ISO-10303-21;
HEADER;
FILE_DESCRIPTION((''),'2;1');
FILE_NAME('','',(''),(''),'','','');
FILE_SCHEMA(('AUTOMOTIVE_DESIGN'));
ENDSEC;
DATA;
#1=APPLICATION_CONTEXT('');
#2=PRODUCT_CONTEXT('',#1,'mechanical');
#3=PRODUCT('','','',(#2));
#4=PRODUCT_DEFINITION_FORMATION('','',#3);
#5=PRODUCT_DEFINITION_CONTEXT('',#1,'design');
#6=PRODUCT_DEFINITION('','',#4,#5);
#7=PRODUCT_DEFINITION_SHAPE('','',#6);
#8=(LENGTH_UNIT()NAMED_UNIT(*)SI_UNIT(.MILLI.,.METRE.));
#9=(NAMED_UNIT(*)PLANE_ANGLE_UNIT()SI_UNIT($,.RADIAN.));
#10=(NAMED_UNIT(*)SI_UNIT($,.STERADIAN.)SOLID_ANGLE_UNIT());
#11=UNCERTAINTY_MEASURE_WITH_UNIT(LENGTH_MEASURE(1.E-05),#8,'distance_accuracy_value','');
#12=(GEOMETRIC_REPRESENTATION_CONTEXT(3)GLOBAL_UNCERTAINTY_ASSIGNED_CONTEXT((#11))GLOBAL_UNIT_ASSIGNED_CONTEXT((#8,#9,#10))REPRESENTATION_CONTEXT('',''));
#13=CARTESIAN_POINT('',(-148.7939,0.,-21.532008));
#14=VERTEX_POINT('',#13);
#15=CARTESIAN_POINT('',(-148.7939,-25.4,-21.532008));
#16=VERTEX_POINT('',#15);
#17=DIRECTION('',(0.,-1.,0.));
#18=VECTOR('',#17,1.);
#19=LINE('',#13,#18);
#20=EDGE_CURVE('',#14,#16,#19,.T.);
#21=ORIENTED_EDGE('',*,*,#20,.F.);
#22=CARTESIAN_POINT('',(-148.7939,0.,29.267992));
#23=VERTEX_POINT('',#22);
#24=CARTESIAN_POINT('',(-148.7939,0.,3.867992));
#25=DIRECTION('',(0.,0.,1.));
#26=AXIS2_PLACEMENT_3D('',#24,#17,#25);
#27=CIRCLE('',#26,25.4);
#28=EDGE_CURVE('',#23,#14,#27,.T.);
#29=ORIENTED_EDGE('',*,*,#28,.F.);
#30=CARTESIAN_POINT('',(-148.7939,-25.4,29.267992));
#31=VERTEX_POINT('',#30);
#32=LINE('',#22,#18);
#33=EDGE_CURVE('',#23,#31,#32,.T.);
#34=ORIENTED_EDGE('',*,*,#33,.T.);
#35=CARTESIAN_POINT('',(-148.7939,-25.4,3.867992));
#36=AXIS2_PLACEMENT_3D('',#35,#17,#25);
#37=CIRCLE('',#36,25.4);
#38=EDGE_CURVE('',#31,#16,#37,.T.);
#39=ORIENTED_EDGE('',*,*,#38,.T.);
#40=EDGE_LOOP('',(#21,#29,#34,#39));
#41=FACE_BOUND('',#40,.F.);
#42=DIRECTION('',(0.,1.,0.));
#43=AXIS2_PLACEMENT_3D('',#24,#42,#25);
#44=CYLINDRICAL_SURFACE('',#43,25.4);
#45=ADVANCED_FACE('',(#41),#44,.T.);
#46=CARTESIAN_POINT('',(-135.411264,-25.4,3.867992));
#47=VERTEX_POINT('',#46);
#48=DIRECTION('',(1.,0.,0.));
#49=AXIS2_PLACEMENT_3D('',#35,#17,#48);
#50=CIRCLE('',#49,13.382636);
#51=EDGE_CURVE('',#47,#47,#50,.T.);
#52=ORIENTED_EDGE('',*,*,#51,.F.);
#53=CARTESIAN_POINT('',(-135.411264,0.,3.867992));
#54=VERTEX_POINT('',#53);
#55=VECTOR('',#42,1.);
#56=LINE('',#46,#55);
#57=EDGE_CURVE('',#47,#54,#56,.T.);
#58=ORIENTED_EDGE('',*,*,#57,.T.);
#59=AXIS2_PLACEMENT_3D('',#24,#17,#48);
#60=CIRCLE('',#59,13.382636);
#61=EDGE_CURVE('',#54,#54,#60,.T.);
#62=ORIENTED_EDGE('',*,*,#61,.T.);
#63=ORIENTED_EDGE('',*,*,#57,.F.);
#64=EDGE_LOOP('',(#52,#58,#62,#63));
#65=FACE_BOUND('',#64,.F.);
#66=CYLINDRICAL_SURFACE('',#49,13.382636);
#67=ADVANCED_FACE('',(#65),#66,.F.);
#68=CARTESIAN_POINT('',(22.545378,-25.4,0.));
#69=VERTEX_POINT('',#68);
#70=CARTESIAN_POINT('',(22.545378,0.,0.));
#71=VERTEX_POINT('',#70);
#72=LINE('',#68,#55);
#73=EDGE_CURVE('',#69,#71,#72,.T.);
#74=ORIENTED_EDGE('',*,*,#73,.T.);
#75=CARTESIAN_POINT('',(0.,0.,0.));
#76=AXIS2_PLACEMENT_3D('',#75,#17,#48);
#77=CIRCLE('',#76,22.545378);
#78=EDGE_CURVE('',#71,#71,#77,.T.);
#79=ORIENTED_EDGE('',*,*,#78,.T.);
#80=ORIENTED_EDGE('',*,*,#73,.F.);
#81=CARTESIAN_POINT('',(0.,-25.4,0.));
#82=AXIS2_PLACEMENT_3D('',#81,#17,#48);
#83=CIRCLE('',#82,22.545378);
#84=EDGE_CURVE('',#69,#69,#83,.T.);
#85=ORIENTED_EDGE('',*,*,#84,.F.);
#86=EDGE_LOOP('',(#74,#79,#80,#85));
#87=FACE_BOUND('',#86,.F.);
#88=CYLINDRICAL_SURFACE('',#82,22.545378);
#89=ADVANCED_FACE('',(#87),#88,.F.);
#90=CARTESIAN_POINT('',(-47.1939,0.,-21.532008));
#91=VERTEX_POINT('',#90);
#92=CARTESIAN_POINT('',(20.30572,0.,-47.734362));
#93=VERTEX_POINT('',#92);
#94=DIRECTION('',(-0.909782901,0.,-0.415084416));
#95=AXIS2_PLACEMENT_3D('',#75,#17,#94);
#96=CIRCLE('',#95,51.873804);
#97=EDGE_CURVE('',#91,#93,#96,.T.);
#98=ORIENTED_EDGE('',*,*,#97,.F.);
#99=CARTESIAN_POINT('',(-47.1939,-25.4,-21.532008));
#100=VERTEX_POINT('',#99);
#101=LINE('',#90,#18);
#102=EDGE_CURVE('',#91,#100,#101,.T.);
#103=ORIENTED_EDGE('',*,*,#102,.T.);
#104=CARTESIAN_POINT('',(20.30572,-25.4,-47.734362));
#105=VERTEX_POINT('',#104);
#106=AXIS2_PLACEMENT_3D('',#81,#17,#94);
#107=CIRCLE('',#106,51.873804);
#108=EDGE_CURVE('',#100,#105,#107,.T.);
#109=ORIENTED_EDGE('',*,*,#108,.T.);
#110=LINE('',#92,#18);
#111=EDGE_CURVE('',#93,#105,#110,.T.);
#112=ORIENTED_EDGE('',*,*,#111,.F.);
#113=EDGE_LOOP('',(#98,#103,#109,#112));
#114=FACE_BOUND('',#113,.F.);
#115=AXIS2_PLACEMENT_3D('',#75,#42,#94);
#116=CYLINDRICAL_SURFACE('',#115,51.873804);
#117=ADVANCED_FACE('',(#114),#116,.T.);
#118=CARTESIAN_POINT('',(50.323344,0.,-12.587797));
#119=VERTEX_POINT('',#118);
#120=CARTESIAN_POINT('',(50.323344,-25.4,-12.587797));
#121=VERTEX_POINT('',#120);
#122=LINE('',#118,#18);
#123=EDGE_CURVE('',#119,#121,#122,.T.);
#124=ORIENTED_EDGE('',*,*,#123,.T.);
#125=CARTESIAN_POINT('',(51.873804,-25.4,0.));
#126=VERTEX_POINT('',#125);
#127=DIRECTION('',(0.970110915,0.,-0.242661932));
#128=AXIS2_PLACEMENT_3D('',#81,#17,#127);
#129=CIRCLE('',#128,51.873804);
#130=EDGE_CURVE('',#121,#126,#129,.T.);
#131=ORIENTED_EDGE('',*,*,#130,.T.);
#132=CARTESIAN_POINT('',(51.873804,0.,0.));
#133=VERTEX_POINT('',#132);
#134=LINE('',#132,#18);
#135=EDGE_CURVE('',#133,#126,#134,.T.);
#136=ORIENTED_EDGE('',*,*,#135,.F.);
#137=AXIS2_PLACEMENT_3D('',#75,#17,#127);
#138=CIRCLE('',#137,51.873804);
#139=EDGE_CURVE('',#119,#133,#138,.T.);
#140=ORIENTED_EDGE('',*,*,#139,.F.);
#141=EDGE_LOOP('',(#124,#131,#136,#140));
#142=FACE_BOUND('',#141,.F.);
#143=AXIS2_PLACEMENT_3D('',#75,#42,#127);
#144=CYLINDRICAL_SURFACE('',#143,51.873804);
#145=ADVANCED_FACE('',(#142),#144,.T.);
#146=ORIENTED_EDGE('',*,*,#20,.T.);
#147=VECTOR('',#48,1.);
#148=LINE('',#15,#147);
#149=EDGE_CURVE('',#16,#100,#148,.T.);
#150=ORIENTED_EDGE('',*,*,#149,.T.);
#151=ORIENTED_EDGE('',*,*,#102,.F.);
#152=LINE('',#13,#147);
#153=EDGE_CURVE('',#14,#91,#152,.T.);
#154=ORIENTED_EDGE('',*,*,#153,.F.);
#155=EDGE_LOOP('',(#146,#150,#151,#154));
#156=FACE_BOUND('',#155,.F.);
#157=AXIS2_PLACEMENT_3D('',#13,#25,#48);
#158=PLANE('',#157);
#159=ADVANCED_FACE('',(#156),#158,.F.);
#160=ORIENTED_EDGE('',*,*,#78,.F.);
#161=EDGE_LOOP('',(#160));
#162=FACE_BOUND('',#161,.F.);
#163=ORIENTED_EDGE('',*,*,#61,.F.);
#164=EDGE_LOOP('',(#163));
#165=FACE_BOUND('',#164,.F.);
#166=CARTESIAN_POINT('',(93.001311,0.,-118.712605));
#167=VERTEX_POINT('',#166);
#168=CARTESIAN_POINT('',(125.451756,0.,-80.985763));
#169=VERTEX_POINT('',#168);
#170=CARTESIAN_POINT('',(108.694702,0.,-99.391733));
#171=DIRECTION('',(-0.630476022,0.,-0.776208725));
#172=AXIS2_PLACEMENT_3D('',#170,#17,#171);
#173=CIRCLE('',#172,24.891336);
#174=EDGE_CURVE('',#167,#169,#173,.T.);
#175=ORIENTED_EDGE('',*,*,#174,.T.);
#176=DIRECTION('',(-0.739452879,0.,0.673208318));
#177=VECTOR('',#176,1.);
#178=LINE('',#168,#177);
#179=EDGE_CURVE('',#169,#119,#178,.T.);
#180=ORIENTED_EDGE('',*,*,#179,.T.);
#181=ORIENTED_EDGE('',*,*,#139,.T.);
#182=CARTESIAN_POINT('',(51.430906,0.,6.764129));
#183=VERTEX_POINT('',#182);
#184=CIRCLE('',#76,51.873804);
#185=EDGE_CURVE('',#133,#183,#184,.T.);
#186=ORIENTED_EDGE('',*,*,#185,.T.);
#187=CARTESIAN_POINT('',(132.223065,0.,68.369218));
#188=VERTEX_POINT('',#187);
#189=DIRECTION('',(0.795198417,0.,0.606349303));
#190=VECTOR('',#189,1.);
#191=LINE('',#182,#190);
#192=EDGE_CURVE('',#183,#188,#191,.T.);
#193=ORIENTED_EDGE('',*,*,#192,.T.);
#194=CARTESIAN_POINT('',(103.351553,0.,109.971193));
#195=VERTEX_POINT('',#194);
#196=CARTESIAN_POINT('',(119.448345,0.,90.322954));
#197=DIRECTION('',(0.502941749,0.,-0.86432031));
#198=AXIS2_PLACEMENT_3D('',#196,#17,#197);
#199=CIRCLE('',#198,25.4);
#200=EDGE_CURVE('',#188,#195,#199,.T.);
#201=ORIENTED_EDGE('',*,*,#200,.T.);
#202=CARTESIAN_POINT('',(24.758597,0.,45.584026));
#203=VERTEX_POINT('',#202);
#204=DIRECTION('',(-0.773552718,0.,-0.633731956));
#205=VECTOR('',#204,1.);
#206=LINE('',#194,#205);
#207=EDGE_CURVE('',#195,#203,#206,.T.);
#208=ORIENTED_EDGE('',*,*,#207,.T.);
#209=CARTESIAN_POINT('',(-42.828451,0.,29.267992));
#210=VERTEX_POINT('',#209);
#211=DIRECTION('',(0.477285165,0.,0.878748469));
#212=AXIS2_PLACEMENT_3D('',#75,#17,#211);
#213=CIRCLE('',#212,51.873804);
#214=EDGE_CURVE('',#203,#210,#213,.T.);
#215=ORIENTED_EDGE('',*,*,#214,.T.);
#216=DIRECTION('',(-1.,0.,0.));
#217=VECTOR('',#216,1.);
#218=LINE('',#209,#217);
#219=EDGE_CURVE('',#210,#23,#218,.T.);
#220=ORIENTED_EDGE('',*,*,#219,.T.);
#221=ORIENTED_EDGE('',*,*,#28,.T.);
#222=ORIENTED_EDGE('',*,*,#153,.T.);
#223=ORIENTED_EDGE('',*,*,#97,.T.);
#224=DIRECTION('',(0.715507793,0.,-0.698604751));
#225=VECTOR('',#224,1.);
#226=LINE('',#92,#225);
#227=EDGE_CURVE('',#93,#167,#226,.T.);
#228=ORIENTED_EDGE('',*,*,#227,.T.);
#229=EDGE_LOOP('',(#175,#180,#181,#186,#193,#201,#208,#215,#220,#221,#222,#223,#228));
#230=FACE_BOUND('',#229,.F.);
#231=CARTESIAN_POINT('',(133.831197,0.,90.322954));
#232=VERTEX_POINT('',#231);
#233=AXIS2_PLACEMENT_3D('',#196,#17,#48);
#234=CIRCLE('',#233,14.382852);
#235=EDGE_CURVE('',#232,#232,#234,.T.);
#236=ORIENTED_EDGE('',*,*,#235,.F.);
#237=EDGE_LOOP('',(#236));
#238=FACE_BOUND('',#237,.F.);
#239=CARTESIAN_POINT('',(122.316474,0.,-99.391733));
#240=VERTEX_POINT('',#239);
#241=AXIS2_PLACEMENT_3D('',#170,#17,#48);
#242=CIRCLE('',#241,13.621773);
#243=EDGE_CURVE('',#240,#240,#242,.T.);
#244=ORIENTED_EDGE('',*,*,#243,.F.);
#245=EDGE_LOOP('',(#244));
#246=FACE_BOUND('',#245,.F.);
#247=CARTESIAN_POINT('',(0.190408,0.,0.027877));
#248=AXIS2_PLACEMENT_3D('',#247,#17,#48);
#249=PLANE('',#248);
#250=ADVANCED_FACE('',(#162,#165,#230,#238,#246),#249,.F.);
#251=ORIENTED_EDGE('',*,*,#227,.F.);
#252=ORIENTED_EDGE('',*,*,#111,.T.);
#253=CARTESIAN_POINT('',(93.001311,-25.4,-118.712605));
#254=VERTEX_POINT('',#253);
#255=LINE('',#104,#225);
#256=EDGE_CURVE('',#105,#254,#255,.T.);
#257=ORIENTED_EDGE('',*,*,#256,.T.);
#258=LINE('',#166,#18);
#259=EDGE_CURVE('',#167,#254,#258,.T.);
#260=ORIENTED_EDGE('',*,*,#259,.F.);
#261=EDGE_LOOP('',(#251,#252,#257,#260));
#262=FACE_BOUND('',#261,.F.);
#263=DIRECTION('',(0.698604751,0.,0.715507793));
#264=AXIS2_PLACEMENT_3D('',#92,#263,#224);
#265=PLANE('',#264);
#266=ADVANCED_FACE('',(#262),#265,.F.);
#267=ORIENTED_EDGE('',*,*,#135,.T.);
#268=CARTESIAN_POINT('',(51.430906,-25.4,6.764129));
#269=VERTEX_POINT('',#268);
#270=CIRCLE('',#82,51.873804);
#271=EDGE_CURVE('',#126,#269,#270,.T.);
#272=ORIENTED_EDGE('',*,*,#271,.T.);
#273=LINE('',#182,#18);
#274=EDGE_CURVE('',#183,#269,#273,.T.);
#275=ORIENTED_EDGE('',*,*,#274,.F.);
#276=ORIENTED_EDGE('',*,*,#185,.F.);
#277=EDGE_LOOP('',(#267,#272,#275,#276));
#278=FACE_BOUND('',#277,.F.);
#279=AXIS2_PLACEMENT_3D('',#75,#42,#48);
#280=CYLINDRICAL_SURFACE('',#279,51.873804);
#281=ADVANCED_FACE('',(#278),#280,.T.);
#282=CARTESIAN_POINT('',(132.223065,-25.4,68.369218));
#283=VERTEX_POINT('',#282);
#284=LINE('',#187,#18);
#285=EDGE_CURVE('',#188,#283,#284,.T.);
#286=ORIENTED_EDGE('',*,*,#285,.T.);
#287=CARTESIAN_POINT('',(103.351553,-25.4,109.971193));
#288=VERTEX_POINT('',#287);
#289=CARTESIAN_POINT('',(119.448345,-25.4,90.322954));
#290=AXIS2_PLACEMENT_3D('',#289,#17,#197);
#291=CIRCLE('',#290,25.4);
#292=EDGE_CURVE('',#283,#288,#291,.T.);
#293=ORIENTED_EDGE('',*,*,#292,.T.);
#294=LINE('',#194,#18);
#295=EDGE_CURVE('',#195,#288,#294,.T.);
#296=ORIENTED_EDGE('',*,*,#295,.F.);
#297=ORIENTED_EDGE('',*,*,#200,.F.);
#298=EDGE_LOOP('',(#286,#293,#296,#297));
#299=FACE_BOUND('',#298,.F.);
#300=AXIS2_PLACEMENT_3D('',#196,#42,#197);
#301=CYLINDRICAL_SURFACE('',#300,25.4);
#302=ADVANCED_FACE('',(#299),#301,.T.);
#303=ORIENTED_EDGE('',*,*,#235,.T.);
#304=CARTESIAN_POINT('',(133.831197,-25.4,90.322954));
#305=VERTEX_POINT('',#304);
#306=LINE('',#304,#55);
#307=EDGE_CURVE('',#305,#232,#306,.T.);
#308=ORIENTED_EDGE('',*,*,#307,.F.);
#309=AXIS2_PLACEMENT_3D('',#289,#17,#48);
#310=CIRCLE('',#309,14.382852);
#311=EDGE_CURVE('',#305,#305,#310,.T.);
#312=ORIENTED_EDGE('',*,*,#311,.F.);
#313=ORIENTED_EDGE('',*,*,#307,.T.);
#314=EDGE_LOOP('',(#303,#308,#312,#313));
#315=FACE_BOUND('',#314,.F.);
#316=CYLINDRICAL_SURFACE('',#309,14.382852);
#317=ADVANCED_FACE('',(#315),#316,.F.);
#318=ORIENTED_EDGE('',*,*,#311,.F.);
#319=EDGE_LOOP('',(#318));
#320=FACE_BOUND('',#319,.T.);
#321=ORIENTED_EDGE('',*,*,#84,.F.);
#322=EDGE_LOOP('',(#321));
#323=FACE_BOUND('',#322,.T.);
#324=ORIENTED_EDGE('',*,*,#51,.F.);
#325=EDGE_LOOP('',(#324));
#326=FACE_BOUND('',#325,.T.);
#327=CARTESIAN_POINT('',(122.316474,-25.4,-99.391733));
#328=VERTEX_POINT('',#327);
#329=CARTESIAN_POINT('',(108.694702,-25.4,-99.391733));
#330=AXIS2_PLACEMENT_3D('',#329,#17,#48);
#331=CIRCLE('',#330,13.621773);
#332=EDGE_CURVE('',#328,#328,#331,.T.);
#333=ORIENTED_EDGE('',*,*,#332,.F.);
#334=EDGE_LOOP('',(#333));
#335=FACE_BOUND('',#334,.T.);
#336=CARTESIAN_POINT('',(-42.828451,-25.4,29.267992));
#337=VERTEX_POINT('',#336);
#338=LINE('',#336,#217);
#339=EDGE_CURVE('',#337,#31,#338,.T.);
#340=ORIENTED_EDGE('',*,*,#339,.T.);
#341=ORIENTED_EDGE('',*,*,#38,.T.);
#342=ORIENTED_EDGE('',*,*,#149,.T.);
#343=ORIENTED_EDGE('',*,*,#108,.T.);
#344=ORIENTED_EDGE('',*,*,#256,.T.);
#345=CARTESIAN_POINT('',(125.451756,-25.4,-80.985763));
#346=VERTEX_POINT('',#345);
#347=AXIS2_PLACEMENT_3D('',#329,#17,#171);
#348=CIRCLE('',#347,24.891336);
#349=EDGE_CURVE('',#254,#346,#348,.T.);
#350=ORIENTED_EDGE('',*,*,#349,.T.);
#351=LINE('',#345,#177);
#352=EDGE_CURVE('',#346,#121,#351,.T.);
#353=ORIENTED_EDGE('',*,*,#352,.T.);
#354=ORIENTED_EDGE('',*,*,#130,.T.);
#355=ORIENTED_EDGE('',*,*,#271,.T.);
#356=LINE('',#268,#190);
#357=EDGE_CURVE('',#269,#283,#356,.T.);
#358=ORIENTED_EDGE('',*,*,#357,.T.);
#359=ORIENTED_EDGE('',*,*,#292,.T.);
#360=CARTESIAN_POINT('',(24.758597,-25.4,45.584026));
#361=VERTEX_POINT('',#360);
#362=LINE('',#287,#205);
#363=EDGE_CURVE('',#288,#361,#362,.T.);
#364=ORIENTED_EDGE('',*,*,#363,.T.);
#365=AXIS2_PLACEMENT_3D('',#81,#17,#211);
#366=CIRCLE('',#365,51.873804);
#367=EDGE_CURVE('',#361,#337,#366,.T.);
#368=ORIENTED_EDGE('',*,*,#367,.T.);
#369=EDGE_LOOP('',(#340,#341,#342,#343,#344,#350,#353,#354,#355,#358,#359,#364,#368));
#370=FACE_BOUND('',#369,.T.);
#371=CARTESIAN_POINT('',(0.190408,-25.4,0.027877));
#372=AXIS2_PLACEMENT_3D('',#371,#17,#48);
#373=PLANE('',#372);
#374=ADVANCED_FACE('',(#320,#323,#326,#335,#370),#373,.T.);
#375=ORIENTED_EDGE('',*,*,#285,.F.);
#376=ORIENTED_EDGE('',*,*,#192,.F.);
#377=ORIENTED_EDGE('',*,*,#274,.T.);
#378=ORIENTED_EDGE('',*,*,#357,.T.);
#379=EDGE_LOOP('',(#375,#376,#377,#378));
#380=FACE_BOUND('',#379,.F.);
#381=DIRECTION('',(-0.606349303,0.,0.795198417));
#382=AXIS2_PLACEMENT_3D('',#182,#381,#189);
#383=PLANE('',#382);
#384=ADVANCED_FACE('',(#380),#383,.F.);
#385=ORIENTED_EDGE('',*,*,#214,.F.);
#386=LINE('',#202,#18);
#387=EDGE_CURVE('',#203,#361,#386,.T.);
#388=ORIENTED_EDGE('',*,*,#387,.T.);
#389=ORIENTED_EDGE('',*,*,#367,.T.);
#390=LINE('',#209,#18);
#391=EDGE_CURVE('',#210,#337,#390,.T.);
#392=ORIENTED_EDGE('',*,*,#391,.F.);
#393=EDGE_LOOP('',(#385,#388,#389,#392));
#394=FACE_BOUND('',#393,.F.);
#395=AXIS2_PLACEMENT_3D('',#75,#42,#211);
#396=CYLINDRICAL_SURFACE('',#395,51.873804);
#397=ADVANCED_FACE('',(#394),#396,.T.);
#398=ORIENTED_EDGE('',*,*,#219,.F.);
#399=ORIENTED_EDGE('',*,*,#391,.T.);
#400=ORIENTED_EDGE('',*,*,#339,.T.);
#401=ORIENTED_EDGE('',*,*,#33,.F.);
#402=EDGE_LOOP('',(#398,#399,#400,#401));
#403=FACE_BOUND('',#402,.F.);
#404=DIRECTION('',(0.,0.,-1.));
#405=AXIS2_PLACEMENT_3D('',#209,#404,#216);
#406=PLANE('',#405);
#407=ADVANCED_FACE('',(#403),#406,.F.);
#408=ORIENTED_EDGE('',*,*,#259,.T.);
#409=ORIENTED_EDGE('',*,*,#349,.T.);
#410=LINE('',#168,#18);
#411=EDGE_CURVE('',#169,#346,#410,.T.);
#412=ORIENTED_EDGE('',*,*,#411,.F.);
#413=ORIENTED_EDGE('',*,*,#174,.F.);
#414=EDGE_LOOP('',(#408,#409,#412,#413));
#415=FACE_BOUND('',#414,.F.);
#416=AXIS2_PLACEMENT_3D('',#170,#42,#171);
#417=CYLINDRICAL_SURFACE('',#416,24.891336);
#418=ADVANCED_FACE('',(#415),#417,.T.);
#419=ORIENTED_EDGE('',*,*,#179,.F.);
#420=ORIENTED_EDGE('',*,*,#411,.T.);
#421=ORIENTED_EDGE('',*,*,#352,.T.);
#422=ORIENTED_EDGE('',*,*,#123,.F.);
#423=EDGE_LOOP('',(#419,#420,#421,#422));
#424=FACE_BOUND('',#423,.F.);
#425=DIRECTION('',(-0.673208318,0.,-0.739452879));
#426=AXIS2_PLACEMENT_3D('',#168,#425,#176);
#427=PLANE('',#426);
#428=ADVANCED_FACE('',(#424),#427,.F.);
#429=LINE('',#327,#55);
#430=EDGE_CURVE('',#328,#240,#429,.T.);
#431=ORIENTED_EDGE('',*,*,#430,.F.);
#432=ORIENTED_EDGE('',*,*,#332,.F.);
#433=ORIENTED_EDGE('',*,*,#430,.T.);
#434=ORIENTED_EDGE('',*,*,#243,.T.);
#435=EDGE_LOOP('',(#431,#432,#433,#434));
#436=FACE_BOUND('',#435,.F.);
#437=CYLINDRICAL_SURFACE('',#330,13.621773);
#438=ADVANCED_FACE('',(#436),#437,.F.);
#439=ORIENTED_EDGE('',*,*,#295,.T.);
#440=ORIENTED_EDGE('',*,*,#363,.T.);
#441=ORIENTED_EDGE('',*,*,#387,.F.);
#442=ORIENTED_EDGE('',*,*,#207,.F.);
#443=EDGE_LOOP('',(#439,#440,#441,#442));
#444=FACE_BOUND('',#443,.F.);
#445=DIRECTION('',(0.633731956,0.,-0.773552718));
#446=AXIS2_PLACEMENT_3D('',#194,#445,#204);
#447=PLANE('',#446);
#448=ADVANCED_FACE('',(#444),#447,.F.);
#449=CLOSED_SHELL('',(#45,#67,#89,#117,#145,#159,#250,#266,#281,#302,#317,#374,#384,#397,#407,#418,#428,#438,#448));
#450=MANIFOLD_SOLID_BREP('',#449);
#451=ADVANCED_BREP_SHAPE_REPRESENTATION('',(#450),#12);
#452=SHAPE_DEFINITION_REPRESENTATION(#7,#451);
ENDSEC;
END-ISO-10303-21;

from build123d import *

# Parameters (mm, degrees)
F1_DEPTH  = 25.4
F2_R      = 22.5453784596
F3_DEPTH  = 25.401
F4_R      = 15.5169822629
F4_R_2    = 14.6151483758
F4_R_3    = 13.5851891759
F5_DEPTH  = 419
F6_R      = 14.3828522328
F7_DEPTH  = 25.401
F8_R      = 13.6217726984
F9_DEPTH  = 25.4
F10_R     = 13.3826357349
F11_DEPTH = 25.4


# Not quite as in the source:
# - an extrude ends at something that could not be found from the text; its depth is read off the source's solid


with BuildPart() as f1:
    # F0 (on Front) → F1 (new body)
    with BuildSketch(Plane.XZ):
        with BuildLine():
            ThreePointArc((50.3233435561, -12.5877974986), (51.4847298632, -6.3414622483), (51.873804107, 0))
            ThreePointArc((51.873804107, 0), (51.7629612184, 3.3893064834), (51.4309062461, 6.7641285647))
            ThreePointArc((51.4309062461, 6.7641285647), (42.7546046022, 29.3757610599), (24.7585971482, 45.5840259278))
            ThreePointArc((24.7585971482, 45.5840259278), (-12.1730496974, 50.4252755431), (-42.8284505735, 29.2679923125))
            ThreePointArc((-42.8284505735, 29.2679923125), (-51.683323237, 4.4413569672), (-47.1939000029, -21.5320076875))
            ThreePointArc((-47.1939000029, -21.5320076875), (-18.7719046051, -48.3581135905), (20.3057196076, -47.7343618764))
            ThreePointArc((20.3057196076, -47.7343618764), (39.4453595209, -33.6890956364), (50.3233435561, -12.5877974986))
        make_face()
        with BuildLine():
            ThreePointArc((24.7585971482, 45.5840259278), (42.7546046022, 29.3757610599), (51.4309062461, 6.7641285647))
            Line((51.4309062461, 6.7641285647), (132.2230654066, 68.3692177878))
            ThreePointArc((132.2230654066, 68.3692177878), (140.3155469651, 104.8046621717), (103.3515533001, 109.9711926872))
            Line((103.3515533001, 109.9711926872), (24.7585971482, 45.5840259278))
        make_face()
        with BuildLine():
            Line((125.4517560768, -80.9857626154), (50.3233435561, -12.5877974986))
            ThreePointArc((50.3233435561, -12.5877974986), (39.4453595209, -33.6890956364), (20.3057196076, -47.7343618764))
            Line((20.3057196076, -47.7343618764), (93.0013113713, -118.7126045859))
            ThreePointArc((93.0013113713, -118.7126045859), (127.5656184462, -115.6234022642), (125.4517560768, -80.9857626154))
        make_face()
        with BuildLine():
            ThreePointArc((-47.1939000029, -21.5320076875), (-51.683323237, 4.4413569672), (-42.8284505735, 29.2679923125))
            Line((-42.8284505735, 29.2679923125), (-148.7939000029, 29.2679923125))
            ThreePointArc((-148.7939000029, 29.2679923125), (-174.1939000029, 3.8679923125), (-148.7939000029, -21.5320076875))
            Line((-148.7939000029, -21.5320076875), (-47.1939000029, -21.5320076875))
        make_face()
    extrude(amount=F1_DEPTH)

    # F2 (on face) → F3 (cut, through all)
    with BuildSketch(Plane.XZ.offset(25.4)):
        Circle(F2_R)
    extrude(amount=-F3_DEPTH, mode=Mode.SUBTRACT)

    # F4 (on face) → F5 (cut, through all)
    with BuildSketch(Plane.XZ.offset(25.4)):
        with Locations((119.4483449899, 90.3229536493)):
            Circle(F4_R)
        with Locations((108.694701762, -99.3917325452)):
            Circle(F4_R_2)
        with Locations((-148.7939000029, 3.8679923125)):
            Circle(F4_R_3)
    extrude(amount=F5_DEPTH, mode=Mode.SUBTRACT)

    # F6 (on face) → F7 (cut, through all)
    with BuildSketch(Plane.XZ.offset(25.4)):
        with Locations((119.4483449899, 90.3229536493)):
            Circle(F6_R)
    extrude(amount=-F7_DEPTH, mode=Mode.SUBTRACT)

    # F8 (on face) → F9 (cut)
    with BuildSketch(Plane.XZ.offset(25.4)):
        with Locations((108.694701762, -99.3917325452)):
            Circle(F8_R)
    extrude(amount=-F9_DEPTH, mode=Mode.SUBTRACT)

    # F10 (on face) → F11 (cut)
    with BuildSketch(Plane.XZ.offset(25.4)):
        with Locations((-148.7939000029, 3.8679923125)):
            Circle(F10_R)
    extrude(amount=-F11_DEPTH, mode=Mode.SUBTRACT)


solid = f1.part
